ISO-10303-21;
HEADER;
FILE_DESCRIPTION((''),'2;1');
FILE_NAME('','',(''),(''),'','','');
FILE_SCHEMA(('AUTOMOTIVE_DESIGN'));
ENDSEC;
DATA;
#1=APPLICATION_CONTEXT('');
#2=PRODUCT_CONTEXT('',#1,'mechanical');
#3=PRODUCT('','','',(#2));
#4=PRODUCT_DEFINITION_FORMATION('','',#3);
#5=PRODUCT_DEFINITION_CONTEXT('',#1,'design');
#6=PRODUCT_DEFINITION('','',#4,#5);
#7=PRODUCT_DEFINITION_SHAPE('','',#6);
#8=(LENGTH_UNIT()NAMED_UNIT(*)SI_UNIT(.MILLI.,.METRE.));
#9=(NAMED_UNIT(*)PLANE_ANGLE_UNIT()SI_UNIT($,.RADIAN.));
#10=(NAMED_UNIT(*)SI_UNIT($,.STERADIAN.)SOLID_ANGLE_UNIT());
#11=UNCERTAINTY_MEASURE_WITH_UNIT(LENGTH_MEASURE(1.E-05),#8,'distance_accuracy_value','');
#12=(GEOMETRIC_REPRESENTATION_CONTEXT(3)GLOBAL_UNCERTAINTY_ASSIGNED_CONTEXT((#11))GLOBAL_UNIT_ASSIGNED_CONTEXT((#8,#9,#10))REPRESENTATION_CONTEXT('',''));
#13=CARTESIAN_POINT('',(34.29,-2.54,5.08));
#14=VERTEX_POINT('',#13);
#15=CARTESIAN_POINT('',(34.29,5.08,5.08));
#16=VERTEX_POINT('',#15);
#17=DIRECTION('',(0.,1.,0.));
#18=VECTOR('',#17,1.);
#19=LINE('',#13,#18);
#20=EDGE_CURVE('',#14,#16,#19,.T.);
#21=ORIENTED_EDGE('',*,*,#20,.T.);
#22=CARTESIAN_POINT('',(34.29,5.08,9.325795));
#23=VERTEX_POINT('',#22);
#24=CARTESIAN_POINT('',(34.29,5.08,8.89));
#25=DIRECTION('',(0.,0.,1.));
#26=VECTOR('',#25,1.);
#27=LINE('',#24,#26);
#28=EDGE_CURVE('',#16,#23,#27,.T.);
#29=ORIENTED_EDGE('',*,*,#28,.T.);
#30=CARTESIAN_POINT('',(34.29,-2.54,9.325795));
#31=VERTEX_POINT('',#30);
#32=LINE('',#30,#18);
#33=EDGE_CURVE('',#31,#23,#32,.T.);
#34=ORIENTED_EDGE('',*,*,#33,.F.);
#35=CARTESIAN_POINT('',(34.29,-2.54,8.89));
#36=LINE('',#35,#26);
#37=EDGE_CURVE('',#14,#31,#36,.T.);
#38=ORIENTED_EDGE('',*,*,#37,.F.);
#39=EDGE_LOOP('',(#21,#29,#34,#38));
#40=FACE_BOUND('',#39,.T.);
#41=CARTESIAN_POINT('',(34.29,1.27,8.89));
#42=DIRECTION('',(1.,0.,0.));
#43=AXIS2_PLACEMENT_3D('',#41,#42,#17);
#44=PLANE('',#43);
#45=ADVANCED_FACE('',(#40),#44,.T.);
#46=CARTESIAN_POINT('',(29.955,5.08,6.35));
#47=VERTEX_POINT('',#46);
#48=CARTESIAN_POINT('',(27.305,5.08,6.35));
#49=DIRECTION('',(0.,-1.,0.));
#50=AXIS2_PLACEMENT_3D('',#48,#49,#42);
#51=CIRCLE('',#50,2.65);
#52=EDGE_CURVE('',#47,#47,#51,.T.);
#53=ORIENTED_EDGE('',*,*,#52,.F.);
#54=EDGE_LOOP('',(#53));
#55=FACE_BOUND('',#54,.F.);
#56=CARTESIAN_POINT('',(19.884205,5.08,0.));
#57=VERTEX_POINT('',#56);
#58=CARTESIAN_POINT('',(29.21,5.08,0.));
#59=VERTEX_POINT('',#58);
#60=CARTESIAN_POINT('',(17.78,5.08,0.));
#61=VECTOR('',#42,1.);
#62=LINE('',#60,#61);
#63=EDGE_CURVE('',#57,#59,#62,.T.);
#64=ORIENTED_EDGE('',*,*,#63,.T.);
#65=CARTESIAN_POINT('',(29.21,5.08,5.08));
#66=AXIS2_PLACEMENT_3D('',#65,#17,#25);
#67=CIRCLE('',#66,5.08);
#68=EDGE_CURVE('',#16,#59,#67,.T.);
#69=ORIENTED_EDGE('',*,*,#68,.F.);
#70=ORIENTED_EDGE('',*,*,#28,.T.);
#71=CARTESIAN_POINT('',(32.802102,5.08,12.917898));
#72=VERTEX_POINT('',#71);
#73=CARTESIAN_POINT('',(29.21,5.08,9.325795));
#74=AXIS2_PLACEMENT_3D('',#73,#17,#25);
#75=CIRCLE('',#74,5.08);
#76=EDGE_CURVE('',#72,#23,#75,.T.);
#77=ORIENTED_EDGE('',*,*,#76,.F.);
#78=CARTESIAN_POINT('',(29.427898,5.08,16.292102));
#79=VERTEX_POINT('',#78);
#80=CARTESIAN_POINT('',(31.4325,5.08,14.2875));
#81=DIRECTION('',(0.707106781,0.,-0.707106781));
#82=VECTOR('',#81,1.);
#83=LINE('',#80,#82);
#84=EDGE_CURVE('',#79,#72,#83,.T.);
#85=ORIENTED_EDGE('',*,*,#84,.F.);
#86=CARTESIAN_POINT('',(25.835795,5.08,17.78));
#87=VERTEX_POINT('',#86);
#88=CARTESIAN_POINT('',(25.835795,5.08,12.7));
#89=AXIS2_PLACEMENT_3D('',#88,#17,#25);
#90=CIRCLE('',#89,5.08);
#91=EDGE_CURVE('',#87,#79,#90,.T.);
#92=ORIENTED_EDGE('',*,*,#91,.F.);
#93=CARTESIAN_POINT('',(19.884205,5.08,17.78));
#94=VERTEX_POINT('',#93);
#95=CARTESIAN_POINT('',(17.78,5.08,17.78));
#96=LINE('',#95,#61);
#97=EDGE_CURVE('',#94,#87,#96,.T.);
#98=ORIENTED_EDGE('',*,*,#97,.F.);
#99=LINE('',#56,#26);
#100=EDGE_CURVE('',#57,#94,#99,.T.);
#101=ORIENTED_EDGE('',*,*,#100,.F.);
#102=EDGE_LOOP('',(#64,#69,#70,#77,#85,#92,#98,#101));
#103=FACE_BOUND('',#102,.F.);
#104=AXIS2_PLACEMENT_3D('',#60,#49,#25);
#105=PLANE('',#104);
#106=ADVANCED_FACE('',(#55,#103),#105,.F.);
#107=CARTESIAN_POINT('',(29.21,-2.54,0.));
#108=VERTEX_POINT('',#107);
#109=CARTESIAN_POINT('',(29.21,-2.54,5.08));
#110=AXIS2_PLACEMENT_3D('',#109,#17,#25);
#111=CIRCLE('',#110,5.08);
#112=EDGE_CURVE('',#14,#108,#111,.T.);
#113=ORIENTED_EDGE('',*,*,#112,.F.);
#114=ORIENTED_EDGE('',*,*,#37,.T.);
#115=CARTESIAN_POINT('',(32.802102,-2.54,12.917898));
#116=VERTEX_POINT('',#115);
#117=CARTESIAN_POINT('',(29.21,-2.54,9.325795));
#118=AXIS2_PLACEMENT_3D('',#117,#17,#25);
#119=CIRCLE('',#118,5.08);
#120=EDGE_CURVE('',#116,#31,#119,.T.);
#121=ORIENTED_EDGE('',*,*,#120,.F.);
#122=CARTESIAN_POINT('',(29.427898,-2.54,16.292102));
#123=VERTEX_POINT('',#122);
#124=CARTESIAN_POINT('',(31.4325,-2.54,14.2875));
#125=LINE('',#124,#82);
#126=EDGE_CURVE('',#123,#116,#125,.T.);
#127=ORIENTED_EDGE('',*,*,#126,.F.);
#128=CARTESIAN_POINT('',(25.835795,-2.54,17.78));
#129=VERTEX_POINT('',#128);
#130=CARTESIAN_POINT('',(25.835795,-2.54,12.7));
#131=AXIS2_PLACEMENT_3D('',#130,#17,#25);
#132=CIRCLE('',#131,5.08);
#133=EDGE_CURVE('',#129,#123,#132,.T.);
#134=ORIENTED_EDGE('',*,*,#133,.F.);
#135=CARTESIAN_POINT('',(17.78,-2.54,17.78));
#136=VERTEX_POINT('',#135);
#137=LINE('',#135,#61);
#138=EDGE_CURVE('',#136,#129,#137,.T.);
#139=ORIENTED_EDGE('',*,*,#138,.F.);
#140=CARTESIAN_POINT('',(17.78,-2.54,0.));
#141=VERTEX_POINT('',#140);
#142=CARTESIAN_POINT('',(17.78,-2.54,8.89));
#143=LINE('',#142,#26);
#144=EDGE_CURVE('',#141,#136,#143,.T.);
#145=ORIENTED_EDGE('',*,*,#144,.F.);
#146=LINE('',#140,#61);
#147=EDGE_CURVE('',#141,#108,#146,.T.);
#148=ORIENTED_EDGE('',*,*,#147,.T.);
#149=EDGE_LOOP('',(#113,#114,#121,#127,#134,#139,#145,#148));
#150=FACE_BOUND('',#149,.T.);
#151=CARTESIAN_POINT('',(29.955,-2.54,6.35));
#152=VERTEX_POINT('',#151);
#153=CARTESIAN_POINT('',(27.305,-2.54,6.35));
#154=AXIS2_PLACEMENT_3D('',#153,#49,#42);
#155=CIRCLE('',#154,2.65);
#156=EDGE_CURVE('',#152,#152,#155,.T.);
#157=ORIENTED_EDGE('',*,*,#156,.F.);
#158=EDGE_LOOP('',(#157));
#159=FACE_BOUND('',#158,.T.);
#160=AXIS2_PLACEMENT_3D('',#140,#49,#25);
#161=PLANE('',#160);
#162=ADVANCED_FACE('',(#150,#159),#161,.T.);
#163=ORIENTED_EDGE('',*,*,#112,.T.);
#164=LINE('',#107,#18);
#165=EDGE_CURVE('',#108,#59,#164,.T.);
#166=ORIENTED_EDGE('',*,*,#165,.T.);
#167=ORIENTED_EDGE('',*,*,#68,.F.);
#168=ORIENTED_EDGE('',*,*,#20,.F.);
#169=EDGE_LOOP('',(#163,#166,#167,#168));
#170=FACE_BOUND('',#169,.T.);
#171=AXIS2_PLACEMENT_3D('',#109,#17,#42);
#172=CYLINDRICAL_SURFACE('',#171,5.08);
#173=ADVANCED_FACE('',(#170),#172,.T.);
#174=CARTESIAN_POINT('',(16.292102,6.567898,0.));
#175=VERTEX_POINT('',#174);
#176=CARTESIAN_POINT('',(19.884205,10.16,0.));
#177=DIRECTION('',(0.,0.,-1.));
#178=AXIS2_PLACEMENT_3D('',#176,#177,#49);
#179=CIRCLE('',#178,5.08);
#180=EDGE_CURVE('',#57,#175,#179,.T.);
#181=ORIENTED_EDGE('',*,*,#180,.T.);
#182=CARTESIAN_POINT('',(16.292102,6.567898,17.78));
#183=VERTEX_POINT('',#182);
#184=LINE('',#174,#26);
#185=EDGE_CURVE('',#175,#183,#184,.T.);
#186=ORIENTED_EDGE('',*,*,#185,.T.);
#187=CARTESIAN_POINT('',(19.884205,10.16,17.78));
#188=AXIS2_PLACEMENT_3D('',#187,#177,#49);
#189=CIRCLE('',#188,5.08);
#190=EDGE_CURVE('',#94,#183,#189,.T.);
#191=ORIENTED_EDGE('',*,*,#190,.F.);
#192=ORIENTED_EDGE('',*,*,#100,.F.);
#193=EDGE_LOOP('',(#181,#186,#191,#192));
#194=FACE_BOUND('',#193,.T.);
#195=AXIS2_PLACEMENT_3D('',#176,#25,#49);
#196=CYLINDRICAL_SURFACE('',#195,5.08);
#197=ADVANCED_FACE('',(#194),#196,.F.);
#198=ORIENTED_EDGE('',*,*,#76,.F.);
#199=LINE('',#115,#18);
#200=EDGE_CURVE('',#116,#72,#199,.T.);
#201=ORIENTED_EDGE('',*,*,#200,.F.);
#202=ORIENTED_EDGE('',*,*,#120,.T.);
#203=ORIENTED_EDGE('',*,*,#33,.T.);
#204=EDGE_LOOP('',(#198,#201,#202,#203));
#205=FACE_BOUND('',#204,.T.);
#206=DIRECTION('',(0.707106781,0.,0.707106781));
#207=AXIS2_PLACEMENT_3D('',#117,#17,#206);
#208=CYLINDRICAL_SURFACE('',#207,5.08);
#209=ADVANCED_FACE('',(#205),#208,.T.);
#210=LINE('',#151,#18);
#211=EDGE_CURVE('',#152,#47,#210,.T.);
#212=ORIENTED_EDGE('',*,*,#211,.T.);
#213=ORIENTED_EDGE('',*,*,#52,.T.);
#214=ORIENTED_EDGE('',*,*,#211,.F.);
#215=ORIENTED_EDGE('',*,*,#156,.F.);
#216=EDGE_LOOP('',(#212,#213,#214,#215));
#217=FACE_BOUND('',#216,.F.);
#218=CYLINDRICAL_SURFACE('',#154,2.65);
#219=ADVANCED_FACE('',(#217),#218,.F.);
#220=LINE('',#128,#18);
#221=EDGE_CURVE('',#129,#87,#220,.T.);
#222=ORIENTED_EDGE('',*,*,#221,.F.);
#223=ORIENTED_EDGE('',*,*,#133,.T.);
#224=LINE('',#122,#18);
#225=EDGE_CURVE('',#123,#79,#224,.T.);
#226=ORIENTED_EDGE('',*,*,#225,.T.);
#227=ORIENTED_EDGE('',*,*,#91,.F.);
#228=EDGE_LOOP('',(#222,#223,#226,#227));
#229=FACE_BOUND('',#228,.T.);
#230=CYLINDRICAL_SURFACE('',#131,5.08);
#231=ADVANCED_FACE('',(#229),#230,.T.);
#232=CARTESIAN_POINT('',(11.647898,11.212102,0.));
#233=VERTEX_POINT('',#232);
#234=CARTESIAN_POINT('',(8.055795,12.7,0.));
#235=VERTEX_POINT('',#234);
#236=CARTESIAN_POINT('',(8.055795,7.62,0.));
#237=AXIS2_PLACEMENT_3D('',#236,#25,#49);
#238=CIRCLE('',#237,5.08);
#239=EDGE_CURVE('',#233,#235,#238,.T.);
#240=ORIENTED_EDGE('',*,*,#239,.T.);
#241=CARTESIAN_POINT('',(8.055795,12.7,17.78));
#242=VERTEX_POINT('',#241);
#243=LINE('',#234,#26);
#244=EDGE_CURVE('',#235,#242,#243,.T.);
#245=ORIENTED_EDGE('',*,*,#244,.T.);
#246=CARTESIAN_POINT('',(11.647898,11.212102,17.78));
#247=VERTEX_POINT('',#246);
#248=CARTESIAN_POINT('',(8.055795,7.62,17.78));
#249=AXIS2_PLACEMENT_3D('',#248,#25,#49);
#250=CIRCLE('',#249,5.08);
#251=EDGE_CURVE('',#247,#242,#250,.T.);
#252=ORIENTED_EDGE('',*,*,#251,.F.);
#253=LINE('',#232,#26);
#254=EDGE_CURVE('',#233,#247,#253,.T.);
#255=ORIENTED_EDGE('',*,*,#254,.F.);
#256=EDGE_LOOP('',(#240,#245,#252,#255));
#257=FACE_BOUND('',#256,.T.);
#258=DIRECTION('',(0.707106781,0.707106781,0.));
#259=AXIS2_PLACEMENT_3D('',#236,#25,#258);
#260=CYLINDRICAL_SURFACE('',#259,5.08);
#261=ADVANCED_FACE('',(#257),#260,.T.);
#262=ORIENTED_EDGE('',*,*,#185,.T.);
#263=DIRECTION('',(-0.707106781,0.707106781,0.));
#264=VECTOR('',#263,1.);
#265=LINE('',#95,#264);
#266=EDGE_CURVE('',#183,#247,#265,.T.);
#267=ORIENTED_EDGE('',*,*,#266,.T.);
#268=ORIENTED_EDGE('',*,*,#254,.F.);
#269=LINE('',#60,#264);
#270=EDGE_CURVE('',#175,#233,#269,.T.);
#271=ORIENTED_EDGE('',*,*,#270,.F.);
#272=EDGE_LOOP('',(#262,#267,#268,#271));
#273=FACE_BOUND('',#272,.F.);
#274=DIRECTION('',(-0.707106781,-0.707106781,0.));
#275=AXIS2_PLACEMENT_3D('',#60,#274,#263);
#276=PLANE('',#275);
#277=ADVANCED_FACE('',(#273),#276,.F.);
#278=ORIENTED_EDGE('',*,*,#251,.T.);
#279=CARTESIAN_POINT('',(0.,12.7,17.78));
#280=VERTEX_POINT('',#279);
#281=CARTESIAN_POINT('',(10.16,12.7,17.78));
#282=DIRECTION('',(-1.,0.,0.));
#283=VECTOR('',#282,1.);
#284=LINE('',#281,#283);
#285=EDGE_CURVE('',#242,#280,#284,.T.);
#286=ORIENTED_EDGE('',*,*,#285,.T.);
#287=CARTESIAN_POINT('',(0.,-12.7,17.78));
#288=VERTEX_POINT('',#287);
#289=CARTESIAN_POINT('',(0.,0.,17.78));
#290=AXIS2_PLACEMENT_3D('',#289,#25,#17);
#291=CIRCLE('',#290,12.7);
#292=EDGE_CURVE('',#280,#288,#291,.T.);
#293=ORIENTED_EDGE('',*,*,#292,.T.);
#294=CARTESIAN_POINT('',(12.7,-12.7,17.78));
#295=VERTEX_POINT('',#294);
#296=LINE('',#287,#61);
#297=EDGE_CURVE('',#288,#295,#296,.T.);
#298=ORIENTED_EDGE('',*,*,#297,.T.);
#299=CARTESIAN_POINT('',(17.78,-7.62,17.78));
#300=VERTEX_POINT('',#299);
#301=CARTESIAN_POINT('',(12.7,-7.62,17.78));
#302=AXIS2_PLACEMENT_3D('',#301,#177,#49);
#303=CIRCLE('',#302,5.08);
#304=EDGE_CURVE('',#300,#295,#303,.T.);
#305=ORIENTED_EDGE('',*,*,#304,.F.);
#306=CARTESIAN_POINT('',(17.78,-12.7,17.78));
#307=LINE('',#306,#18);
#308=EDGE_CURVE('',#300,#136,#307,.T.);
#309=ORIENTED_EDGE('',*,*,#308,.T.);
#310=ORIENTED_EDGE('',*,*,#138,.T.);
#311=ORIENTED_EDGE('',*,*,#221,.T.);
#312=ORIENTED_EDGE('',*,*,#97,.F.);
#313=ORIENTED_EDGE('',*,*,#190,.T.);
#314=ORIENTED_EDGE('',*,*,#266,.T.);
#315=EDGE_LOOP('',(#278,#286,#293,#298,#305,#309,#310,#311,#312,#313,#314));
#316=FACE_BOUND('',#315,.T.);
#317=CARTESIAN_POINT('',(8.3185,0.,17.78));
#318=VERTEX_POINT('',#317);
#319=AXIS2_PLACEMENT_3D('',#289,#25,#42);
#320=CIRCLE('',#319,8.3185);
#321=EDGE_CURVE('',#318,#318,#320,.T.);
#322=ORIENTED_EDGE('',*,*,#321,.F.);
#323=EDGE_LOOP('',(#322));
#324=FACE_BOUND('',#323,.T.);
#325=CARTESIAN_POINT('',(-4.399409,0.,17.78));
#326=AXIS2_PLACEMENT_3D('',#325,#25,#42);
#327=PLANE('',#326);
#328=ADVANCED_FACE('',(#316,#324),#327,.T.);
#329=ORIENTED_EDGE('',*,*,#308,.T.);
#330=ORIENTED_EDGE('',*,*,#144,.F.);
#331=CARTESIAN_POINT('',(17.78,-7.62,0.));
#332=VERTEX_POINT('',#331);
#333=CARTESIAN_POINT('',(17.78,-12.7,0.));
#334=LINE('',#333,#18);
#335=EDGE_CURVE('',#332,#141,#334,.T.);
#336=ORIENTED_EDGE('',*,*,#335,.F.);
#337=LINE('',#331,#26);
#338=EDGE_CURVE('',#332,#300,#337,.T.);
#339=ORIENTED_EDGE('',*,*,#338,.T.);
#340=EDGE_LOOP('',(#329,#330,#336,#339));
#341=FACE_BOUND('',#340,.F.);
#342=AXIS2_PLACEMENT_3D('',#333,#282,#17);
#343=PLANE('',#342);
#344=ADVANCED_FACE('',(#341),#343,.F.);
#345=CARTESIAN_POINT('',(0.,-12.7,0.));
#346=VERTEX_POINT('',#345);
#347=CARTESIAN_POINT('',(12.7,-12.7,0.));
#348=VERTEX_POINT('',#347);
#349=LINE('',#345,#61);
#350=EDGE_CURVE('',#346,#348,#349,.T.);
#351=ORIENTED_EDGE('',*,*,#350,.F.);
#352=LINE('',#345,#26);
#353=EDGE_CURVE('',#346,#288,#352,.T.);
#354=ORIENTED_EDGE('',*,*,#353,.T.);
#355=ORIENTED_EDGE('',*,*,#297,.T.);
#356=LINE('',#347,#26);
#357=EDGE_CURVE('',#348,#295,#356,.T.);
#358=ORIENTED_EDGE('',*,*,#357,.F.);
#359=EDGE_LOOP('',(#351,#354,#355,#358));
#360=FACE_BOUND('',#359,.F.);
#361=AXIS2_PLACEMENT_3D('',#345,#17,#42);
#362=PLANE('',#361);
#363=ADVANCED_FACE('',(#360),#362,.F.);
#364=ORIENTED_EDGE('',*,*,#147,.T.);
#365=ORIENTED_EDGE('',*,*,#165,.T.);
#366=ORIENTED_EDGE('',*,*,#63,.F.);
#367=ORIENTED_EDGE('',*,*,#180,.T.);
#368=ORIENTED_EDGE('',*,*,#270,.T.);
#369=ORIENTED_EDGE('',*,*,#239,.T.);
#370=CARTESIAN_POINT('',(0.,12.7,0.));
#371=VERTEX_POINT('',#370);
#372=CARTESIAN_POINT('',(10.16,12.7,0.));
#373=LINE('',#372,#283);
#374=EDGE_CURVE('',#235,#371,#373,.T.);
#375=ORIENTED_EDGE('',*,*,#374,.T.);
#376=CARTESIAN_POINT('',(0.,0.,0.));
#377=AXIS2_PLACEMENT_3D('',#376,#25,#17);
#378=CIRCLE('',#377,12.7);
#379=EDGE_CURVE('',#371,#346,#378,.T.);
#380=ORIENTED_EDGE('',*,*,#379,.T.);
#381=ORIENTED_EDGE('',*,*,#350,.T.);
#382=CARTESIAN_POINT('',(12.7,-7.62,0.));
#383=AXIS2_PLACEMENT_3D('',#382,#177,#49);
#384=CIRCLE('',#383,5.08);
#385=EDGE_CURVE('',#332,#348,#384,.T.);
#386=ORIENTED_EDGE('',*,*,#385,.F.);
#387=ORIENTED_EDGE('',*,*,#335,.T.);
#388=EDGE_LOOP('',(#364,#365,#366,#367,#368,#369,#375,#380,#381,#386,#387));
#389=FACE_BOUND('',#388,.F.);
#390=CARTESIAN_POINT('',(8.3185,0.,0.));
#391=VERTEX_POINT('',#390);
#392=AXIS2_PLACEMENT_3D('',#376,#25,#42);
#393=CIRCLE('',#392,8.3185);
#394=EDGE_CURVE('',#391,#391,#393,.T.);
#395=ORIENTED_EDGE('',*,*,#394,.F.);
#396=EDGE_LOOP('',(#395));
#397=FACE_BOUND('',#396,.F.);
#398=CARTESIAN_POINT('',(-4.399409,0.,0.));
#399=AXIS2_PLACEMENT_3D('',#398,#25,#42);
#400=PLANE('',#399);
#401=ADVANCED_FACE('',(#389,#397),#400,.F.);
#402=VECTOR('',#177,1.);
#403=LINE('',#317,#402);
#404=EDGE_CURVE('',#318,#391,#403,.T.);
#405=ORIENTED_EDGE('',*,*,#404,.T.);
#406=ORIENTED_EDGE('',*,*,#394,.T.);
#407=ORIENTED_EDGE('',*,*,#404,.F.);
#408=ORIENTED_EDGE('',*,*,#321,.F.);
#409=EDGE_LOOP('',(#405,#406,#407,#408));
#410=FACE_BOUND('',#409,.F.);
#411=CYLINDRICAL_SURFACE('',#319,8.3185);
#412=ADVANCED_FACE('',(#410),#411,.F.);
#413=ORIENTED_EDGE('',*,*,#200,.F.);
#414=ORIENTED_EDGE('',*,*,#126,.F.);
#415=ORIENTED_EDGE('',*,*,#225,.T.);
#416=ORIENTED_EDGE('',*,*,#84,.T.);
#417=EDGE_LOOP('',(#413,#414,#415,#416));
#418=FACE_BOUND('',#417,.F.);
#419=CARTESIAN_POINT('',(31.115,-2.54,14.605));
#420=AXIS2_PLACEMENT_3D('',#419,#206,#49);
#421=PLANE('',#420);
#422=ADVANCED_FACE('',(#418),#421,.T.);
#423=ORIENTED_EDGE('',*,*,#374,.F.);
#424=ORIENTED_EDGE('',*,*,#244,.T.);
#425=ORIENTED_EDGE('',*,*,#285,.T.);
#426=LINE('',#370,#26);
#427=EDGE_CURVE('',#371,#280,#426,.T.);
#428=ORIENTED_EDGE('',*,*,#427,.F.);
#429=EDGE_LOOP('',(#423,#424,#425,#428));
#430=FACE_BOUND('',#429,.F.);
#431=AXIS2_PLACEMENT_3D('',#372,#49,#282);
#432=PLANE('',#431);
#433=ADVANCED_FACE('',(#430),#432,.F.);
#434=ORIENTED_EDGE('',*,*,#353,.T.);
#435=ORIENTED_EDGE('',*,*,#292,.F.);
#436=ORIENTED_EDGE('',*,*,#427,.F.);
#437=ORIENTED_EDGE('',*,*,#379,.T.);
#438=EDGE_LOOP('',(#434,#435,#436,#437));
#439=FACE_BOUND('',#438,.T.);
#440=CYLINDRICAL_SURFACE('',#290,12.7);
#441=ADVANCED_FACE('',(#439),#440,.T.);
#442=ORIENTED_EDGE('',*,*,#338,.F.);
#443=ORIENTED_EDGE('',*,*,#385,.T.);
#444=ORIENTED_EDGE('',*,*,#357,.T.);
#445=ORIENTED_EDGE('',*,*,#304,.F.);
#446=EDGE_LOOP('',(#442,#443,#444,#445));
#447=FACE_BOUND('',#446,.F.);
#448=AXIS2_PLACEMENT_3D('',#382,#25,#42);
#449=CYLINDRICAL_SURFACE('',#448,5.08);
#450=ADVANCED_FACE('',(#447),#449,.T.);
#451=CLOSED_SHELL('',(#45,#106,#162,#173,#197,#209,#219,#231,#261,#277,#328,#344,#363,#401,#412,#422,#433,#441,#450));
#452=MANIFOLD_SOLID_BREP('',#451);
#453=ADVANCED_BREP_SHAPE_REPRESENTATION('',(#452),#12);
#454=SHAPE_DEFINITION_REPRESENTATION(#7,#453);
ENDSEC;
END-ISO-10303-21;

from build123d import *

# Parameters (mm, degrees)
F1_DEPTH  = 17.78
F2_W      = 7.62
F2_H      = 17.78
F3_DEPTH  = 16.51
F4_SIZE   = 6.35
F5_R      = 2.65
F6_DEPTH  = 25.4
F7_R      = 5.08
F12_DEPTH = 17.78
F13_R     = 8.3185
F14_DEPTH = 17.781


# Not quite as in the source:
# - two fillets or chamfers of one size are made in one step
# - a feature names something its author has since deleted; it is built from what else it names


with BuildPart() as f1:
    # F0 (on Top) → F1 (new body)
    with BuildSketch(Plane.XY):
        Polygon((0, 12.7), (0, -12.7), (17.78, -12.7), (17.78, 5.08), (10.16, 12.7), align=None)
    extrude(amount=F1_DEPTH)

    # F2 (on face) → F3 (join)
    with BuildSketch(Plane.YZ.offset(17.78)):
        with Locations((1.27, 8.89)):
            Rectangle(F2_W, F2_H)
    extrude(amount=F3_DEPTH)

    # F4
    f4_edges = [f1.edges().sort_by_distance(p)[0] for p in [
        (34.29, 1.27, 17.78),
    ]]
    chamfer(f4_edges, length=F4_SIZE)

    # F5 (on face) → F6 (cut)
    with BuildSketch(Plane.XZ.offset(2.54)):
        with Locations((27.305, 6.35)):
            Circle(F5_R)
    extrude(amount=-F6_DEPTH, mode=Mode.SUBTRACT)

    # F7
    f7_edges = [f1.edges().sort_by_distance(p)[0] for p in [
        (27.94, 1.27, 17.78),
        (34.29, 1.27, 11.43),
        (17.78, -12.7, 8.89),
        (17.78, 5.08, 8.89),
        (10.16, 12.7, 8.89),
        (34.29, 1.27, 0),
    ]]
    fillet(f7_edges, radius=F7_R)

    # F11 (on face) → F12 (join, through all)
    with BuildSketch(Plane.XY.offset(17.78)):
        with BuildLine():
            Line((0, -12.7), (0, 12.7))
            ThreePointArc((0, 12.7), (-12.7, 0), (0, -12.7))
        make_face()
    extrude(amount=-F12_DEPTH)

    # F13 (on face) → F14 (cut, through all)
    with BuildSketch(Plane.XY.offset(17.78)):
        Circle(F13_R)
    extrude(amount=-F14_DEPTH, mode=Mode.SUBTRACT)


solid = f1.part
